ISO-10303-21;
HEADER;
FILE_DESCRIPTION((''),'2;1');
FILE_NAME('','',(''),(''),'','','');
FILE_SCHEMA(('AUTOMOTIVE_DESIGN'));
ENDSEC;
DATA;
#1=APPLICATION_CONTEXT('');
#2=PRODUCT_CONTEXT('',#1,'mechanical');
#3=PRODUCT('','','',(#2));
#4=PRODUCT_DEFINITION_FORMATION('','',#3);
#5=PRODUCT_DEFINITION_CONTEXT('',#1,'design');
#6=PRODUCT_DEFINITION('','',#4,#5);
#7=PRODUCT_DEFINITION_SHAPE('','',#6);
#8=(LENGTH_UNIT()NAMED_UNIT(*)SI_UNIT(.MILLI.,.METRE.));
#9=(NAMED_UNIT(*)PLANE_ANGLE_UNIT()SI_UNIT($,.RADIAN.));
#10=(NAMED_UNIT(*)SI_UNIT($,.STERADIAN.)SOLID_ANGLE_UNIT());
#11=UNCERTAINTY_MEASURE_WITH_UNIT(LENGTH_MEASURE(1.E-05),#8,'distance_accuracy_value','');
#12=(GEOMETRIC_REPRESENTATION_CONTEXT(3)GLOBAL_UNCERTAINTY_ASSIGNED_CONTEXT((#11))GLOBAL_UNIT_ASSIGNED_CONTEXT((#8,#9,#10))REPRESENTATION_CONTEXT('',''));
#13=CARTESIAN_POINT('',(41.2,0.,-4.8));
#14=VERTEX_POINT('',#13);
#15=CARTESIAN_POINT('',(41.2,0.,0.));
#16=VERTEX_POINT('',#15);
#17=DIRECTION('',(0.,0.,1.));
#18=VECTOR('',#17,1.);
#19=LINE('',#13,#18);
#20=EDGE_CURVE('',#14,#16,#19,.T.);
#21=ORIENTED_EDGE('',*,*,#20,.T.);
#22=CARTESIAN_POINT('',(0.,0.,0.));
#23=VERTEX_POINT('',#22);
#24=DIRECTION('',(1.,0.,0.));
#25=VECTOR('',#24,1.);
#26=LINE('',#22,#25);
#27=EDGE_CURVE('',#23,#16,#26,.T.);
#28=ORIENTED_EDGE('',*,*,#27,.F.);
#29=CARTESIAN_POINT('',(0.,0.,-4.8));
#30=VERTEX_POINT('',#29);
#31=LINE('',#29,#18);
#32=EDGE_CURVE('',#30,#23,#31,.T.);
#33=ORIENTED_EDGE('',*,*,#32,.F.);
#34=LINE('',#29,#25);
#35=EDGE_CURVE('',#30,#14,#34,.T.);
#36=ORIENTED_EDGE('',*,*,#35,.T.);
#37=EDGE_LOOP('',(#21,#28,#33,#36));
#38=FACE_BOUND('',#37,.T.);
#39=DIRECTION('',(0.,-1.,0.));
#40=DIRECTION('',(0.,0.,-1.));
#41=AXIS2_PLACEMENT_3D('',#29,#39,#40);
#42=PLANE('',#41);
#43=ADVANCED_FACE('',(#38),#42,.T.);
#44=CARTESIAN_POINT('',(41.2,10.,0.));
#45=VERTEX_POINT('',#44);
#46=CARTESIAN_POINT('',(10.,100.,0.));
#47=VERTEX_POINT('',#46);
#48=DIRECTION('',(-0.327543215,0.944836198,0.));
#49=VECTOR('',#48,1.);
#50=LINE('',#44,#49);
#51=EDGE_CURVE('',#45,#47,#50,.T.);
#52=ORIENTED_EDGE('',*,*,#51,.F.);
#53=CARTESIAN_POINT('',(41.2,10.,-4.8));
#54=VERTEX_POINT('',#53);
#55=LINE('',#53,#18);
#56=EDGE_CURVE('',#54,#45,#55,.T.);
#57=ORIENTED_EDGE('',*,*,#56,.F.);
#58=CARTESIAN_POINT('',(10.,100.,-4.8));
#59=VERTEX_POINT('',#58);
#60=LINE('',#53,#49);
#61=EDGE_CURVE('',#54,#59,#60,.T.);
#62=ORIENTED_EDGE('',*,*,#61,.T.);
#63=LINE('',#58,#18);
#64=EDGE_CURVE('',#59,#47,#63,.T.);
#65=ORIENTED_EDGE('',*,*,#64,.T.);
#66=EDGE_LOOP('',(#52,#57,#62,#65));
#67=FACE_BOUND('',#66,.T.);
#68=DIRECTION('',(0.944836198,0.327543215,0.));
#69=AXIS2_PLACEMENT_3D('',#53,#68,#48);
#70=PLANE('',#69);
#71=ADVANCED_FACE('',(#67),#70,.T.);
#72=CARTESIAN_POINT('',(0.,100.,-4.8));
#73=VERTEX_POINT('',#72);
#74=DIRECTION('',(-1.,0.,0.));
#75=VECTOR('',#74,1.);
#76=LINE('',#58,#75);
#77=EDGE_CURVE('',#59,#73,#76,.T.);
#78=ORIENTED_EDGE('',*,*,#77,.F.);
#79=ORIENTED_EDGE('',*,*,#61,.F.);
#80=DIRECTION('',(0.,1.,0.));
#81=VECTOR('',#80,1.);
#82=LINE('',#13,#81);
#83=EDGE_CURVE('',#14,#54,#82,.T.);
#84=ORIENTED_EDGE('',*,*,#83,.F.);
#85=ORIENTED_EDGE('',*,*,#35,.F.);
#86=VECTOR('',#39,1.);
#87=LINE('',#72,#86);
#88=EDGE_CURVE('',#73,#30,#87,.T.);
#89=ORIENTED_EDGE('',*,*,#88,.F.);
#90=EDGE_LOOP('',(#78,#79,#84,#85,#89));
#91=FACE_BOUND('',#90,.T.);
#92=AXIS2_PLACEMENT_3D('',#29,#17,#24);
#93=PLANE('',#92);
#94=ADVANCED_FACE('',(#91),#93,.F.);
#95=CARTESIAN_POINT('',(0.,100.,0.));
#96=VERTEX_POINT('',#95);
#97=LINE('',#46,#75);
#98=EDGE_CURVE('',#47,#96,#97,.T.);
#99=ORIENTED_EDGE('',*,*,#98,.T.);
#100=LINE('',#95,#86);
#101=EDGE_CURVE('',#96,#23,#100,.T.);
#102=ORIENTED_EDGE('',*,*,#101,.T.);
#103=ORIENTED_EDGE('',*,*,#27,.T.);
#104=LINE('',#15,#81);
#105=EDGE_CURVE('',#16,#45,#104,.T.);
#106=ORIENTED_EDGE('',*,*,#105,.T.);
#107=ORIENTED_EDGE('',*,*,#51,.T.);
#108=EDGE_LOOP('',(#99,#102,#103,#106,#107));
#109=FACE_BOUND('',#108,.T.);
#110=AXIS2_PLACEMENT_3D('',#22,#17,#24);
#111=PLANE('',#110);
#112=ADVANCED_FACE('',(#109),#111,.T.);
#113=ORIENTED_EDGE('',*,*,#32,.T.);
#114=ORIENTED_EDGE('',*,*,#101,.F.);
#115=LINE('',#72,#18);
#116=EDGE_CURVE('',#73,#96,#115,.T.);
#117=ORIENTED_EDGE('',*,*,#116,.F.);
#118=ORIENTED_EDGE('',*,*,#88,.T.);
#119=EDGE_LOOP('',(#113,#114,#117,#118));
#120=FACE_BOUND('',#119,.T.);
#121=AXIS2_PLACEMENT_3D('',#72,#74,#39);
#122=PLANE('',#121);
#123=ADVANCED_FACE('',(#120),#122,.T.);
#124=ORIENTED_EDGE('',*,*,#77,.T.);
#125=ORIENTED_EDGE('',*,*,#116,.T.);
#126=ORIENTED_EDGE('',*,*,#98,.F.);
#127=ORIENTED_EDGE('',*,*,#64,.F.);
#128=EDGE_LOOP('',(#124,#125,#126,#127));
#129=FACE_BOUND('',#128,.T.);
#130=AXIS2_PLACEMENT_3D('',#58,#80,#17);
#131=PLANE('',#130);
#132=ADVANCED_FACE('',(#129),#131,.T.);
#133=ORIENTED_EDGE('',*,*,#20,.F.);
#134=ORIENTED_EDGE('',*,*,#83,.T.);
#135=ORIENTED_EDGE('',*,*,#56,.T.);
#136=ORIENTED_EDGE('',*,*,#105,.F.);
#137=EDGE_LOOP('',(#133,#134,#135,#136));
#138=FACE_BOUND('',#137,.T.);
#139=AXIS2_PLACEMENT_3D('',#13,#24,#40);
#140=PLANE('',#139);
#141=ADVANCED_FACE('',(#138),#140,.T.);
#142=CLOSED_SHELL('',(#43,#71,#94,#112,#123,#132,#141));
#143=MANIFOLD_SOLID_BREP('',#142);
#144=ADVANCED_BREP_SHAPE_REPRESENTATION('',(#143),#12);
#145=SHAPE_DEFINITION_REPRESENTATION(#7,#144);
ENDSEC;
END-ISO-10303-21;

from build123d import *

# Parameters (mm, degrees)
FLANGE_BASE1_DEPTH = 4.8


# Sheet-metal steps are written as plain solids
with BuildPart() as part:
    # Esboço1 → Flange-base1 (new body)
    with BuildSketch(Plane.XY):
        Polygon((0, 0), (41.2, 0), (41.2, 10), (10, 100), (0, 100), align=None)
    extrude(amount=-FLANGE_BASE1_DEPTH)


solid = part.part
